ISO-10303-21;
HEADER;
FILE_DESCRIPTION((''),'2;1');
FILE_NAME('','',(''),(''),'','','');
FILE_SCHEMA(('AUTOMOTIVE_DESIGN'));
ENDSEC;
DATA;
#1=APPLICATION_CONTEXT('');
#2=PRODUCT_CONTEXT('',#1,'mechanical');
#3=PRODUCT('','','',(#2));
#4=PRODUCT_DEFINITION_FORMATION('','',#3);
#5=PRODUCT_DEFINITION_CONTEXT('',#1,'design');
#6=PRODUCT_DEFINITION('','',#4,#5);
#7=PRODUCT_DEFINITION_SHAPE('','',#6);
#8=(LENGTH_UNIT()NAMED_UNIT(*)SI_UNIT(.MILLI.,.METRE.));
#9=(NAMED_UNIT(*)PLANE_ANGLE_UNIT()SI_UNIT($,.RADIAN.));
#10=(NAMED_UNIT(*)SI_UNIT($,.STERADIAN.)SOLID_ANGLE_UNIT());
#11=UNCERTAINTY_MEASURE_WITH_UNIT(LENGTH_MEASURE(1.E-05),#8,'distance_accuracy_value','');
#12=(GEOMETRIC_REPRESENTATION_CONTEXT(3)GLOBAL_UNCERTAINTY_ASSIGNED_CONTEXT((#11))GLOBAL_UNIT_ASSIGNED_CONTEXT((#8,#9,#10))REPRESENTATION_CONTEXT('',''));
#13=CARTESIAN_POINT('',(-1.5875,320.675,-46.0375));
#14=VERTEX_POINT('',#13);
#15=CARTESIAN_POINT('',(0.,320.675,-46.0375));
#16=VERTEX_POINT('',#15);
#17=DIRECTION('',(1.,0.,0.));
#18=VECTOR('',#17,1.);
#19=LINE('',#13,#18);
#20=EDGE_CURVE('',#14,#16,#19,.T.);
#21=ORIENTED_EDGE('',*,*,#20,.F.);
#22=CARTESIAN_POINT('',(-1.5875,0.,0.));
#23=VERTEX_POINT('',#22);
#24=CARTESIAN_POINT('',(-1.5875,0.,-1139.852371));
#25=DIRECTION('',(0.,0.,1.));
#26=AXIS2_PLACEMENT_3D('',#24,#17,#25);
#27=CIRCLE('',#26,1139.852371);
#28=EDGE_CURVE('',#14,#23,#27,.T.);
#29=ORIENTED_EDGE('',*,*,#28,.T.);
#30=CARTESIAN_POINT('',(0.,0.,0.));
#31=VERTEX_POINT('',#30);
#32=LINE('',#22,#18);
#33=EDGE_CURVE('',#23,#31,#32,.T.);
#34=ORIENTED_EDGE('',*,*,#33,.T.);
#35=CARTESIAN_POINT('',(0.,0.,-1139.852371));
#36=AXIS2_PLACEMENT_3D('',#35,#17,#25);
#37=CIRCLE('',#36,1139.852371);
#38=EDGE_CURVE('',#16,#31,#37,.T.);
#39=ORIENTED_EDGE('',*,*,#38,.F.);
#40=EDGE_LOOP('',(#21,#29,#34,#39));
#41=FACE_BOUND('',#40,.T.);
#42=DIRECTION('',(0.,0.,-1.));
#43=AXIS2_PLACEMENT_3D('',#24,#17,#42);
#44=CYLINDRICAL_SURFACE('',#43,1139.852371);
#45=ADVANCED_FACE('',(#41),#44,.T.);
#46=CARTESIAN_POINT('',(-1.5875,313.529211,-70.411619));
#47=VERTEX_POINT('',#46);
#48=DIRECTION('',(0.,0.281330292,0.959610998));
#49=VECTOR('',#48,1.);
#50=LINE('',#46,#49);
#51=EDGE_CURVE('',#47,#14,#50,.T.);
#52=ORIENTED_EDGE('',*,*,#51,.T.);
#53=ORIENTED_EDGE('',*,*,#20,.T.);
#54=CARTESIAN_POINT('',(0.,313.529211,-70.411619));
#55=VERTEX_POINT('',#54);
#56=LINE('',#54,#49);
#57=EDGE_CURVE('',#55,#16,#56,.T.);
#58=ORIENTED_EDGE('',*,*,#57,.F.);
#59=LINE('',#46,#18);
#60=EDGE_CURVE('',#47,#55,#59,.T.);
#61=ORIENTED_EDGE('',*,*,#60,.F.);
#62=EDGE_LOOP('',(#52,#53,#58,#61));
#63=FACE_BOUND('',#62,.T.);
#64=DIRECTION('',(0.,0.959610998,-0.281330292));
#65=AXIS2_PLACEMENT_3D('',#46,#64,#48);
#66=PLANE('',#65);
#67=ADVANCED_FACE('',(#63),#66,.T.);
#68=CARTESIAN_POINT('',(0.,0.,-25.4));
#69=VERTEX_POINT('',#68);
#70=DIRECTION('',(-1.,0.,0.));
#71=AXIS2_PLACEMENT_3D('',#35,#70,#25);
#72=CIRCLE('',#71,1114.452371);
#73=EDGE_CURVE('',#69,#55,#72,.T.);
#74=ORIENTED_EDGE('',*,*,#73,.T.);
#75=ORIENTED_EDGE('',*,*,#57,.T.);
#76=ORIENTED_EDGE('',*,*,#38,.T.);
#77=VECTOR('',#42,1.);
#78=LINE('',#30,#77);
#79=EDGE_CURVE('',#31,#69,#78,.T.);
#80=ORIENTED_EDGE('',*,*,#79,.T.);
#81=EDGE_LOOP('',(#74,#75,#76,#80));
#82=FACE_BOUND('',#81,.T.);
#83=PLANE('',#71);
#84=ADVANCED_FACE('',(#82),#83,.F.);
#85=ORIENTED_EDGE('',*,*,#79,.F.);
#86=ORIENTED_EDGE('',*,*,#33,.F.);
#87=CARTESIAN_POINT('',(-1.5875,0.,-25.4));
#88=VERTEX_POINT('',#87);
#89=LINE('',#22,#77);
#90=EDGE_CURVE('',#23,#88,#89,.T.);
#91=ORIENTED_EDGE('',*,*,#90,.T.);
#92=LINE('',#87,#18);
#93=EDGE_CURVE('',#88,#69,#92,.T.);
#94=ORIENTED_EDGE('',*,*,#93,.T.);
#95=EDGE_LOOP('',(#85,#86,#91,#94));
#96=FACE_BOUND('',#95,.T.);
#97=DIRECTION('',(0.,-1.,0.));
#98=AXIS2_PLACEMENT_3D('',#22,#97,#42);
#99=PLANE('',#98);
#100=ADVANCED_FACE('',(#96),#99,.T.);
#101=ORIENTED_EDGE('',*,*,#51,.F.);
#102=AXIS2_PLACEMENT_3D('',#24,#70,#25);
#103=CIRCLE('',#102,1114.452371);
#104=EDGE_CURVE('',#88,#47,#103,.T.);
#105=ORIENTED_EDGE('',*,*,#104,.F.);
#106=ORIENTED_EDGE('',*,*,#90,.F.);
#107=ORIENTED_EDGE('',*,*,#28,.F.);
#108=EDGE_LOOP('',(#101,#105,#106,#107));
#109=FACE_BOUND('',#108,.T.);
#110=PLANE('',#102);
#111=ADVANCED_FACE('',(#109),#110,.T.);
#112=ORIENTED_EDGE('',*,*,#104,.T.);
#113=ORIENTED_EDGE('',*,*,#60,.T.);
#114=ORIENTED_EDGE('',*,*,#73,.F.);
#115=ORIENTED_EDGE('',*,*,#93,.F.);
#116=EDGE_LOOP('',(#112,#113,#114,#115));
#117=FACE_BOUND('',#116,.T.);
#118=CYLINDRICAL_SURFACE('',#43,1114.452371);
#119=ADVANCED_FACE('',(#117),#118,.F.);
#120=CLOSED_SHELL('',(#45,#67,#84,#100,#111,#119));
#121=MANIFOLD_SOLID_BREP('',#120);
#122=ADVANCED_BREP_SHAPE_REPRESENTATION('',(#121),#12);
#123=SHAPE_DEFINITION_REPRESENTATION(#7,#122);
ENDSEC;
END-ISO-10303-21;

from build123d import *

# Parameters (mm, degrees)
BASE_FLANGE1_DEPTH = 1.5875


# Sheet-metal steps are written as plain solids
with BuildPart() as part:
    # Sketch1 → Base-Flange1 (new body)
    with BuildSketch(Plane(origin=(0, 0, 0), x_dir=(0, 0, -1), z_dir=(1, 0, 0))):
        with BuildLine():
            Line((0, 0), (25.4, 0))
            ThreePointArc((25.4, 0), (36.710297522, 158.371881791), (70.411619342, 313.52921059))
            Line((70.411619342, 313.52921059), (46.0375, 320.675))
            ThreePointArc((46.0375, 320.675), (11.568075749, 161.98140868), (0, 0))
        make_face()
    extrude(amount=-BASE_FLANGE1_DEPTH)


solid = part.part
